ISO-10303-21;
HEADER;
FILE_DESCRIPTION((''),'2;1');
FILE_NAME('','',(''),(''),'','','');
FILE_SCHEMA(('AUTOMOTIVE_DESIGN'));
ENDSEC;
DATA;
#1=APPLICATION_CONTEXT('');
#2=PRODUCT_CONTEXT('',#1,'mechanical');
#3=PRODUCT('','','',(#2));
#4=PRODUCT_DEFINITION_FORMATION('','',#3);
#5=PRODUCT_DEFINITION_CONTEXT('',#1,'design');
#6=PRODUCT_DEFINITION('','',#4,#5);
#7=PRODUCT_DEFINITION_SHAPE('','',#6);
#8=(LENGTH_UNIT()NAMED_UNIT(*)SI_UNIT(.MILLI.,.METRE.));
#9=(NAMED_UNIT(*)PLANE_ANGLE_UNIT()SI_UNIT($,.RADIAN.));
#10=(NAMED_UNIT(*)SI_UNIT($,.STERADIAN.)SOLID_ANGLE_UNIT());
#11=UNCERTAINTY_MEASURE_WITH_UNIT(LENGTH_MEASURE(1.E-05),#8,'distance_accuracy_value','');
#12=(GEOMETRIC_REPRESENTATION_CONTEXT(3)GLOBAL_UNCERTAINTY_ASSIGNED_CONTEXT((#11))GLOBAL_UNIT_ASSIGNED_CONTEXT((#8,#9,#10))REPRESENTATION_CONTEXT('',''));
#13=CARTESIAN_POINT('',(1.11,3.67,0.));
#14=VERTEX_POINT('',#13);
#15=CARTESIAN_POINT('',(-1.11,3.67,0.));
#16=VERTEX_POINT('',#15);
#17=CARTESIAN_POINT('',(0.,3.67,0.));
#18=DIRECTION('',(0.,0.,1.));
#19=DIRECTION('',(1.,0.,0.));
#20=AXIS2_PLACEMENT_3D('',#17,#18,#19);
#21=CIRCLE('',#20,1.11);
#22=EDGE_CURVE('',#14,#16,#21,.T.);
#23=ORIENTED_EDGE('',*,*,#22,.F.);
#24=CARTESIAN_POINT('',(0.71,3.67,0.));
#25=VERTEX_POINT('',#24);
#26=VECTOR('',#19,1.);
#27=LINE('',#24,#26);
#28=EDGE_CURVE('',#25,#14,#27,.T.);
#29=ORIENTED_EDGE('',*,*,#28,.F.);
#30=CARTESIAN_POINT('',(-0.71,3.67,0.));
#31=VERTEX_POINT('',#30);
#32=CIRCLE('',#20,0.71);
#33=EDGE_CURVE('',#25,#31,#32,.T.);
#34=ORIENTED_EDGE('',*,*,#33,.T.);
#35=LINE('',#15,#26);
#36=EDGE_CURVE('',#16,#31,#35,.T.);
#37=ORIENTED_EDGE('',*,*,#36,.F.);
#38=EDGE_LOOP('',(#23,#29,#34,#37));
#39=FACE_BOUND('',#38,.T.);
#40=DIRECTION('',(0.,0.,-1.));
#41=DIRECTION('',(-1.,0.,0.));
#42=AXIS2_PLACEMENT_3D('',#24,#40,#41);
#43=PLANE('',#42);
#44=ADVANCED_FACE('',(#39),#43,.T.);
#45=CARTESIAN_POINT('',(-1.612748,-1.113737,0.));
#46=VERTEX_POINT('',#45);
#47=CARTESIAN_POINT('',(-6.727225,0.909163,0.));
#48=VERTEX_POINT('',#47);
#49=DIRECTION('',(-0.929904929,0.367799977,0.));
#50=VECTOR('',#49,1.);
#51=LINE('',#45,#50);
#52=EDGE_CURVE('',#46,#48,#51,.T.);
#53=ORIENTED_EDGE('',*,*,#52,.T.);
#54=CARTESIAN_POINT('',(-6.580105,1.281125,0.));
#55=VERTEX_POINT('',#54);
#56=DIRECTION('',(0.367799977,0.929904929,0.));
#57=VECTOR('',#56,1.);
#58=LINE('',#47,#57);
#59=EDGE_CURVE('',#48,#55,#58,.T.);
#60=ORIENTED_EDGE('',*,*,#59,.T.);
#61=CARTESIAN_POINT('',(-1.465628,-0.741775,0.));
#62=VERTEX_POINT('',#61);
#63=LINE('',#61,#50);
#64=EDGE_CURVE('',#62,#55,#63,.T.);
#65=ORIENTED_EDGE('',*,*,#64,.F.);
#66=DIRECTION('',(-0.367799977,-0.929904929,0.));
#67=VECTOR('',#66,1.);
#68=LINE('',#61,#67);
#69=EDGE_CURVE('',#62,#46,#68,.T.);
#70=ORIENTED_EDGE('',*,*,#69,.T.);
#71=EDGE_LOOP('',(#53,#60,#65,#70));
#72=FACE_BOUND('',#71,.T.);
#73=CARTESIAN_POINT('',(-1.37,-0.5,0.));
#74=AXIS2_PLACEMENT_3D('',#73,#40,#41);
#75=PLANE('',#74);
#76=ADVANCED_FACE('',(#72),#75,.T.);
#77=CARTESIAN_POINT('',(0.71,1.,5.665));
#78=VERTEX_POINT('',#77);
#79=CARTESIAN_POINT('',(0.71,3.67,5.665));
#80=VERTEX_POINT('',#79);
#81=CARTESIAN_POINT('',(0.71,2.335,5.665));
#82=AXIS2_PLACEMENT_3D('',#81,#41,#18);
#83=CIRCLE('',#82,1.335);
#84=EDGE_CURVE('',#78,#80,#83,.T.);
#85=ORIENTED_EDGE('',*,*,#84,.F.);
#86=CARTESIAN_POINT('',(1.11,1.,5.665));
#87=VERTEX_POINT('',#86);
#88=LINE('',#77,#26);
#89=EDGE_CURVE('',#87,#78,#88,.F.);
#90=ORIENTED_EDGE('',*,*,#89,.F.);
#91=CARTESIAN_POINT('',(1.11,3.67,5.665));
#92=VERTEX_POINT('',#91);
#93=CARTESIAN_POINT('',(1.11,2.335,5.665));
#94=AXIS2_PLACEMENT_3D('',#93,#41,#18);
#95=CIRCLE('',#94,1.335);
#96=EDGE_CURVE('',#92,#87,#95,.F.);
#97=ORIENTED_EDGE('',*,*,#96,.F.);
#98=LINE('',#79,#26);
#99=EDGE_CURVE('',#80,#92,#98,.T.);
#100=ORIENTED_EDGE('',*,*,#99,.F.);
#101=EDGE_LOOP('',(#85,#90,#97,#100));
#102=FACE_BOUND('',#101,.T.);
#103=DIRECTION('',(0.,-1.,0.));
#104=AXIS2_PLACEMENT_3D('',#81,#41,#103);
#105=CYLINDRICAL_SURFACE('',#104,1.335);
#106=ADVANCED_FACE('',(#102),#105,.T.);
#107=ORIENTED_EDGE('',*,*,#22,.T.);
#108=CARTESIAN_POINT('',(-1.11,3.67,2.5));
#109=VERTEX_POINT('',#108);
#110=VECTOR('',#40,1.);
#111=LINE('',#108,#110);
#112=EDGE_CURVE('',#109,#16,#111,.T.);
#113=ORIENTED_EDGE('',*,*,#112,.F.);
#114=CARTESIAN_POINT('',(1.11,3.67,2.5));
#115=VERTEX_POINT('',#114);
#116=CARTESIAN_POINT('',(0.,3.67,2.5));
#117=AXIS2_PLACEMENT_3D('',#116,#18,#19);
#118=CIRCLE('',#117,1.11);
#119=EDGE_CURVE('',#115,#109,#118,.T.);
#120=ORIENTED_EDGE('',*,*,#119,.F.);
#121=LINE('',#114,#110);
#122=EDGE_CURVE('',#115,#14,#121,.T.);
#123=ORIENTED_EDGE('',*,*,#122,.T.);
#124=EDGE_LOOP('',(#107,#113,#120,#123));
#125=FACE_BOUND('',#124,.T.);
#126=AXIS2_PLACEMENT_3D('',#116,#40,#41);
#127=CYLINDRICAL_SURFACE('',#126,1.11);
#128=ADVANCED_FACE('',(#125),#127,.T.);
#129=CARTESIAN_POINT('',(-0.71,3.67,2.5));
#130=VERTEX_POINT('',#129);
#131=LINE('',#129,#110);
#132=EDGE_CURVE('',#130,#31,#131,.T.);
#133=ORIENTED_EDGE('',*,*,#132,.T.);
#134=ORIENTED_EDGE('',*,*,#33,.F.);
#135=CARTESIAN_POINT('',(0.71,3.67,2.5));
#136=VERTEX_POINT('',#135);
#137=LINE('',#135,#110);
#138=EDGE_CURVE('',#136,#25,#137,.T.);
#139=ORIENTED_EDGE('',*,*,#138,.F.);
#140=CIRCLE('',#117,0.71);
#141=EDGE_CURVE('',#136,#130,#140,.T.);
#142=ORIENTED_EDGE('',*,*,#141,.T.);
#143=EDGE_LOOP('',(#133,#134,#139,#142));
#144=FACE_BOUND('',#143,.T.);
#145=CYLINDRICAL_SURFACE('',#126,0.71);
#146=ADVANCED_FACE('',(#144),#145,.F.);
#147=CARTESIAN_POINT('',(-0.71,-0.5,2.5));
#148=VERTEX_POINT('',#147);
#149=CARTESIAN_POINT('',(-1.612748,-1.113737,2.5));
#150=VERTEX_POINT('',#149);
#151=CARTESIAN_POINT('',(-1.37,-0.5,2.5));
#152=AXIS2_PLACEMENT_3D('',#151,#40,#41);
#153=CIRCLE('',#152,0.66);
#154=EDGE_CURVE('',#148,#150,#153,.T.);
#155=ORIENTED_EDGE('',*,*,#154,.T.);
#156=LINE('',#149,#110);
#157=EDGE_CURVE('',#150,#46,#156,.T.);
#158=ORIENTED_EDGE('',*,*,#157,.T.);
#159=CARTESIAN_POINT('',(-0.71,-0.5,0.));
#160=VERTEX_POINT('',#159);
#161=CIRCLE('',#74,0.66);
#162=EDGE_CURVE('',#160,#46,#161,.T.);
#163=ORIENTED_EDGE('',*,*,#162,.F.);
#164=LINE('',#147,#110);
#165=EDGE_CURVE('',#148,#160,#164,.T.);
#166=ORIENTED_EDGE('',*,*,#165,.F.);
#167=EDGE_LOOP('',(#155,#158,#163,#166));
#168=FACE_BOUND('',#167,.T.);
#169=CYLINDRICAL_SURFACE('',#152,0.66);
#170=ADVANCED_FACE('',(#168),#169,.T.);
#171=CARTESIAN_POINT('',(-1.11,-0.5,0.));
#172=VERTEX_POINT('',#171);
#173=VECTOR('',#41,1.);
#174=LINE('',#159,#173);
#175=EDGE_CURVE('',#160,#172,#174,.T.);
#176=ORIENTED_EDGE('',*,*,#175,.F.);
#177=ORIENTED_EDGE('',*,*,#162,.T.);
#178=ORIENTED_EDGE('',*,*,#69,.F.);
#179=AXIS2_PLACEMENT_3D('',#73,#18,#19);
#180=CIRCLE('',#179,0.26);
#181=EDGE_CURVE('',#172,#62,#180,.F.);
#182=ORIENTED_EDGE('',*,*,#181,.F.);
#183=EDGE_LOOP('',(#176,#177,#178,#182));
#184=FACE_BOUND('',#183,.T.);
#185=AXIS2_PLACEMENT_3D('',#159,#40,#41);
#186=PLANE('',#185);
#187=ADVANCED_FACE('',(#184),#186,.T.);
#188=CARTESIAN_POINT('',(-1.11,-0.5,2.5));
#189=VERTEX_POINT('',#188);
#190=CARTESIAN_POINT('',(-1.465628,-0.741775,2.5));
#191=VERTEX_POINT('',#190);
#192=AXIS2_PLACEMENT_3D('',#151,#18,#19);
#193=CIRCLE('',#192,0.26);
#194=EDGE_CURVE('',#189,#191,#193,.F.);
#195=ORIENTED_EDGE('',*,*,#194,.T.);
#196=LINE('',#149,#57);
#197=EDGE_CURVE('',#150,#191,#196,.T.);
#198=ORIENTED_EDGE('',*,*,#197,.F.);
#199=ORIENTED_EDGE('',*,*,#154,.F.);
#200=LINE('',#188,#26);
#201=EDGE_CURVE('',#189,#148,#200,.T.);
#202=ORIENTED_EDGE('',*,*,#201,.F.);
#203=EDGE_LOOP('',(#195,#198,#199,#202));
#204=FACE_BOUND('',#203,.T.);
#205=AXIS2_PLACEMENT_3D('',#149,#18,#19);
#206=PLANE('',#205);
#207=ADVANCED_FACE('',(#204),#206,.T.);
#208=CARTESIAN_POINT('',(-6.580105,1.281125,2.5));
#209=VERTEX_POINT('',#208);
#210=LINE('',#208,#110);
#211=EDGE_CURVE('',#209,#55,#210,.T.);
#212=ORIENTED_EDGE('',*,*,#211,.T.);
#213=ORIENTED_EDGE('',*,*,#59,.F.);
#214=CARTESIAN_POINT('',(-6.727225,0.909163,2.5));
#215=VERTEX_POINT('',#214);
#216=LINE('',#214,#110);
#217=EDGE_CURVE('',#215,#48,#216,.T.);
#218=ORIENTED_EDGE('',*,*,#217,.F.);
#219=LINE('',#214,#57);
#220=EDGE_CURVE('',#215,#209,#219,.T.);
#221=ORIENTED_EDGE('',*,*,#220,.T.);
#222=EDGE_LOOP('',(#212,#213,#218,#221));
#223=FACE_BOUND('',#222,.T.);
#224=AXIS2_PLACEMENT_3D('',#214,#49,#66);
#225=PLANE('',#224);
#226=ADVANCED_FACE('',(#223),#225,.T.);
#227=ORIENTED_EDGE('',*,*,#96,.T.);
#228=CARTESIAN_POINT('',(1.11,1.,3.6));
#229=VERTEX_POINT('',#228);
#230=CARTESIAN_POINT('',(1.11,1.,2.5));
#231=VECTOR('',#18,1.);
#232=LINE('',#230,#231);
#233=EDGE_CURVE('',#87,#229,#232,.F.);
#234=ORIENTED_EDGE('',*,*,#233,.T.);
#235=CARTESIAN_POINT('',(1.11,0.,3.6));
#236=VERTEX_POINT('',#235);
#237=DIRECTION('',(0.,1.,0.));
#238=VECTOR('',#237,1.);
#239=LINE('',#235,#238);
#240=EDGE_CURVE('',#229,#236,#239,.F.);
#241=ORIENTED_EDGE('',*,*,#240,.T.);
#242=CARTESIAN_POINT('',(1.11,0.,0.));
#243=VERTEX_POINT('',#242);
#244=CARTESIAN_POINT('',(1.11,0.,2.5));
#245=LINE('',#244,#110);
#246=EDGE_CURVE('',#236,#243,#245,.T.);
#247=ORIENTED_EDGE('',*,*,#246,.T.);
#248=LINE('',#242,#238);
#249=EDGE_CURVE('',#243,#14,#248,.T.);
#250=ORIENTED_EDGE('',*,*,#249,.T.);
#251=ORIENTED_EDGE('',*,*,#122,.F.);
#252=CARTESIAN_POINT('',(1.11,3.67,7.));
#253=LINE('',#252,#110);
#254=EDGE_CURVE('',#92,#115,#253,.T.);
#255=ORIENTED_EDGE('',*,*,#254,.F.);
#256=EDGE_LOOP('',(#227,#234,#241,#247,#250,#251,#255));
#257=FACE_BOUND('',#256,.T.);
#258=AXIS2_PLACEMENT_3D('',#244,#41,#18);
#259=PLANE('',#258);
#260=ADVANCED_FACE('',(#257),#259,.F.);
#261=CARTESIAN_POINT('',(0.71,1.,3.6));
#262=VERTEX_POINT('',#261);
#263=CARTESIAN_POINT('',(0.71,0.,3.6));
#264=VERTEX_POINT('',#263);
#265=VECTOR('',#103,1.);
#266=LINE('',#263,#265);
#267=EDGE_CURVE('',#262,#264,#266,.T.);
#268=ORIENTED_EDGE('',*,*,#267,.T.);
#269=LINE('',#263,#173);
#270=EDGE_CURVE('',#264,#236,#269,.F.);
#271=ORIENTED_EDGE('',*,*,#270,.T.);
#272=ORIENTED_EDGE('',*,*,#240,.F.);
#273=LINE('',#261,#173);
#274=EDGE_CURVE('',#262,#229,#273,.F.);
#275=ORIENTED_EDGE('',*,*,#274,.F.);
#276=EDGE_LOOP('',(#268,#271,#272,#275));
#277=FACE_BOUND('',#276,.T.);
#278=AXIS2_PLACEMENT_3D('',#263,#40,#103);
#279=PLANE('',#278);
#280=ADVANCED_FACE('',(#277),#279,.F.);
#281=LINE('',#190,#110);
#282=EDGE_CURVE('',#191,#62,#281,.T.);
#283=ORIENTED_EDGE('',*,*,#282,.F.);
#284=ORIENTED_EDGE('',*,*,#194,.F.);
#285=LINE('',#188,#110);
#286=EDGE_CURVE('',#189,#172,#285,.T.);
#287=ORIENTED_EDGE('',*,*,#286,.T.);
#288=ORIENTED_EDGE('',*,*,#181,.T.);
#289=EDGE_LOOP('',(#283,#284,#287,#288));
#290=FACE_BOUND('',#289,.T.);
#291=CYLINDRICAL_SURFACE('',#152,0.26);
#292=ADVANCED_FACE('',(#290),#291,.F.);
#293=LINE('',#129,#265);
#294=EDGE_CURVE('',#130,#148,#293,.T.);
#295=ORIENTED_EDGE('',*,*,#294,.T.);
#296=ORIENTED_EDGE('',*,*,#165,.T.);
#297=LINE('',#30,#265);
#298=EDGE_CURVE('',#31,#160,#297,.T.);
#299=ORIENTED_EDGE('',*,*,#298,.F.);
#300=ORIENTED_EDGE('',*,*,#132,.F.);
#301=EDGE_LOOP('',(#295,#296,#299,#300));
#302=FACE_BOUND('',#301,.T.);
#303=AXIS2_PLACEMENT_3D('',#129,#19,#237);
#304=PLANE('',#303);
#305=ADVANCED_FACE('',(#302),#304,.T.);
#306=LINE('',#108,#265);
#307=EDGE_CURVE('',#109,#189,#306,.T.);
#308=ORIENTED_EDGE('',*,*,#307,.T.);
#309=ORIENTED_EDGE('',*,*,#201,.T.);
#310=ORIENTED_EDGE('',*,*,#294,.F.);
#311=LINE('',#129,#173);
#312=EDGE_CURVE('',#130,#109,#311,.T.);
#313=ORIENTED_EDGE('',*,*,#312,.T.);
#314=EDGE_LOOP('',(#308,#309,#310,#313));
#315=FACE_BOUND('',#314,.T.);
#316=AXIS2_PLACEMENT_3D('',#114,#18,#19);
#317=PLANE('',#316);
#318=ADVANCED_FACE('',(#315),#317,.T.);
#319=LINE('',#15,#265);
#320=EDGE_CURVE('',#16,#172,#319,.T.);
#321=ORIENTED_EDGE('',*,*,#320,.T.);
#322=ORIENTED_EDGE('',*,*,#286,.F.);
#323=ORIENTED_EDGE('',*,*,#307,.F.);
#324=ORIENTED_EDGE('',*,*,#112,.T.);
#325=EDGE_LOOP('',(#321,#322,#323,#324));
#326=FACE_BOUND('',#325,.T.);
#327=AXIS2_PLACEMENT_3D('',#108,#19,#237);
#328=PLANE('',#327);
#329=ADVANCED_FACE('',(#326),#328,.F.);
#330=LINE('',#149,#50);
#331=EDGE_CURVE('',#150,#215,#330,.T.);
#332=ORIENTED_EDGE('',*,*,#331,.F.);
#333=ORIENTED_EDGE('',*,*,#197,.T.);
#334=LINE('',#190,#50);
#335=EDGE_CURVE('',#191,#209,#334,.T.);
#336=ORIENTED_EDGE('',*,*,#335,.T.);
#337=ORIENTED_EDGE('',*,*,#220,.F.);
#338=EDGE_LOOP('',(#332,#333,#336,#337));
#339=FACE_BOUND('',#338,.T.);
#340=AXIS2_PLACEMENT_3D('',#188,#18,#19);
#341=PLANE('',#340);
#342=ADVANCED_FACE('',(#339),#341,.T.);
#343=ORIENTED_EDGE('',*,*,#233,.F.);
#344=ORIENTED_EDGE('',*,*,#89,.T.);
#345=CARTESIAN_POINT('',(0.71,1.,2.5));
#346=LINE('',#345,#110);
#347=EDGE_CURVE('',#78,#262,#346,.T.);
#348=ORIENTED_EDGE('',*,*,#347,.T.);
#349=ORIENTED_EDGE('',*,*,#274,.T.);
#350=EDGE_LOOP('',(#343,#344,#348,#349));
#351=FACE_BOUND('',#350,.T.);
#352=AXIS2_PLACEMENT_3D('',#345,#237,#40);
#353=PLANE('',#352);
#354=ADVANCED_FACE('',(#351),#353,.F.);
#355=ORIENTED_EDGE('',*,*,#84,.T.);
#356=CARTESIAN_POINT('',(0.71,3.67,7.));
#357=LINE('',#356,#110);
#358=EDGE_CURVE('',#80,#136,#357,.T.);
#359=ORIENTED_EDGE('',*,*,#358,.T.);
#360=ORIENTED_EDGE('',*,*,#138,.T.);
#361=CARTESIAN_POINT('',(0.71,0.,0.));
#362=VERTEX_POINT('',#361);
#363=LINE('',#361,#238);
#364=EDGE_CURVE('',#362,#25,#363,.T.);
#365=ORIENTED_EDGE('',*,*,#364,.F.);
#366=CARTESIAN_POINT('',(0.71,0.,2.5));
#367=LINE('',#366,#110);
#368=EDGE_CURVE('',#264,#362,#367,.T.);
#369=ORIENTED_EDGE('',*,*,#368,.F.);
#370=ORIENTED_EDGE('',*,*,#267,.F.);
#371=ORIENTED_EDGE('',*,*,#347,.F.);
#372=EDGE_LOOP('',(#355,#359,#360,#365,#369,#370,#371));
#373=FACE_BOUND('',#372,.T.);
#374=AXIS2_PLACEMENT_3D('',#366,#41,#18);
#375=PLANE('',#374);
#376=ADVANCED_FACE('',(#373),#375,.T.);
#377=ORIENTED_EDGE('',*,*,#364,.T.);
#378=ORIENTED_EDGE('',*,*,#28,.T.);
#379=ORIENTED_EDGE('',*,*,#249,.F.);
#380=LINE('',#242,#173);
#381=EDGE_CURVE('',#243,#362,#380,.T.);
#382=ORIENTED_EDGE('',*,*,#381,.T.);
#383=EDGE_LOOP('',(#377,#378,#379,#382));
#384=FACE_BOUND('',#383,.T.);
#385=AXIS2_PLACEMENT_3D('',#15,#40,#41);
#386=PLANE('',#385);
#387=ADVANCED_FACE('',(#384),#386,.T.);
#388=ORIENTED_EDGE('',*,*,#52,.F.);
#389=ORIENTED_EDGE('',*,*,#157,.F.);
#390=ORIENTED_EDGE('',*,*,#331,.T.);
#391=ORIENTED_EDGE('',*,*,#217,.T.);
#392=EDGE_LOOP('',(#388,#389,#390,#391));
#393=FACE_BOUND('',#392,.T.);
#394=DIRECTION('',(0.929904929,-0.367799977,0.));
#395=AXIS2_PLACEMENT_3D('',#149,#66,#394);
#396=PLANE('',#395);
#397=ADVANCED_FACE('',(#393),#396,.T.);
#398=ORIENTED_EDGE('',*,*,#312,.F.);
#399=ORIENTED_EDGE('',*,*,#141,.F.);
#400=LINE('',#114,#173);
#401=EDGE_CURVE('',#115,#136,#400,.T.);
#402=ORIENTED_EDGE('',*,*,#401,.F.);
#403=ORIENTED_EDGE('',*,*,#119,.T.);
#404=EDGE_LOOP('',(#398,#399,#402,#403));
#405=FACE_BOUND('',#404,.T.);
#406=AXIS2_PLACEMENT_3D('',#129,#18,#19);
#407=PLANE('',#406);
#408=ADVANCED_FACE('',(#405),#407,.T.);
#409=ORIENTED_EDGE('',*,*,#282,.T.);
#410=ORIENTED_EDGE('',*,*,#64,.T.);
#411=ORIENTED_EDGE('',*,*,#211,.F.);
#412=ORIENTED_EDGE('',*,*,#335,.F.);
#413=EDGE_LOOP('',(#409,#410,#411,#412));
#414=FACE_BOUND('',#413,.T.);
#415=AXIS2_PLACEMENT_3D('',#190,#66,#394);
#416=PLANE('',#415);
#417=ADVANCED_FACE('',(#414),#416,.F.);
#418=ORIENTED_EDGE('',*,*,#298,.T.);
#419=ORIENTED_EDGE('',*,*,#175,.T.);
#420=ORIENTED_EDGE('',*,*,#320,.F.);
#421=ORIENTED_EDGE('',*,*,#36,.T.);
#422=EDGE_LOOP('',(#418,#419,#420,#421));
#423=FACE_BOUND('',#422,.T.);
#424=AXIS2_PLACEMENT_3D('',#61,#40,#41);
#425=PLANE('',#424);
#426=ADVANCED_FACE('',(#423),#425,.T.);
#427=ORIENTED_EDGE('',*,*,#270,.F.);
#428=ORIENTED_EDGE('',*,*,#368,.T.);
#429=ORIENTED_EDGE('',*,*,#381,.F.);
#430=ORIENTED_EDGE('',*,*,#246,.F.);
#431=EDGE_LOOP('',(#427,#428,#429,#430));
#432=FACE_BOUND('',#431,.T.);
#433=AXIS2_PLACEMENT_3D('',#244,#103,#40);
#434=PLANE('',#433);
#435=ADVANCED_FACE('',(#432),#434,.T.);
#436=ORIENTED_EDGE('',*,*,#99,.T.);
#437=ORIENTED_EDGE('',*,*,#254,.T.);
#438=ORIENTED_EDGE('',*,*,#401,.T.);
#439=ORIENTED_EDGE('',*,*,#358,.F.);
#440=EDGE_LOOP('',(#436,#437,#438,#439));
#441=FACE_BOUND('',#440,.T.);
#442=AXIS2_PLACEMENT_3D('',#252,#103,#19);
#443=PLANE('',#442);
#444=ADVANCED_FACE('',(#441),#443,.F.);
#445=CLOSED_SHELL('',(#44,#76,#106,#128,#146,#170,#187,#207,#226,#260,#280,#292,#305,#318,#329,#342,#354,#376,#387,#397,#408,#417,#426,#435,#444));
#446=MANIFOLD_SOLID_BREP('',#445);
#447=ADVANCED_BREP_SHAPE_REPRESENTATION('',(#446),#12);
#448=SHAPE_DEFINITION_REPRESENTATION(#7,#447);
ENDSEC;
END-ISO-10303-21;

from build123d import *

# Parameters (mm, degrees)
BASE_FLANGE1_DEPTH  = 2.5
SKETCH6_W           = 0.4
SKETCH6_H           = 3.67
BOSS_EXTRUDE1_DEPTH = 4.5
SKETCH7_W           = 3.4
SKETCH7_H           = 1
CUT_EXTRUDE1_DEPTH  = 4.5
FILLET1_RADIUS      = 1.335
FILLET1_LENGTH      = 0.4


# Sheet-metal steps are written as plain solids
with BuildPart() as part:
    # Sketch1 → Base-Flange1 (new body)
    with BuildSketch(Plane.XY):
        with BuildLine():
            Line((0.71, 0), (0.71, 3.67))
            ThreePointArc((0.71, 3.67), (0, 4.38), (-0.71, 3.67))
            Line((-0.71, 3.67), (-0.71, -0.5))
            ThreePointArc((-0.71, -0.5), (-0.998929703, -1.045808423), (-1.612747985, -1.113737253))
            Line((-1.612747985, -1.113737253), (-6.727225094, 0.909162621))
            Line((-6.727225094, 0.909162621), (-6.580105103, 1.281124592))
            Line((-6.580105103, 1.281124592), (-1.465627994, -0.741775282))
            ThreePointArc((-1.465627994, -0.741775282), (-1.223820792, -0.71501544), (-1.11, -0.5))
            Line((-1.11, -0.5), (-1.11, 3.67))
            ThreePointArc((-1.11, 3.67), (0, 4.78), (1.11, 3.67))
            Line((1.11, 3.67), (1.11, 0))
            Line((1.11, 0), (0.71, 0))
        make_face()
    extrude(amount=BASE_FLANGE1_DEPTH)

    # Sketch6 → Boss-Extrude1 (add)
    with BuildSketch(Plane.XY.offset(2.5)):
        with Locations((0.91, 1.835)):
            Rectangle(SKETCH6_W, SKETCH6_H)
    extrude(amount=BOSS_EXTRUDE1_DEPTH)

    # Sketch7 → Cut-Extrude1 (cut)
    with BuildSketch(Plane(origin=(1.11, 0, 0), x_dir=(0, 0, -1), z_dir=(1, 0, 0))):
        with Locations((-5.3, 0.5)):
            Rectangle(SKETCH7_W, SKETCH7_H)
    extrude(amount=-CUT_EXTRUDE1_DEPTH, mode=Mode.SUBTRACT)

    # Fillet1: full round fillet: the end face becomes a half cylinder, R = half its width
    fillet1_face = Plane((0.91, 2.335, 7), x_dir=(-1, 0, 0), z_dir=(0, 0, 1))  # on the end face: x along it, z out of the body
    fillet1_slab = fillet1_face.offset(-FILLET1_RADIUS / 2) * Box(FILLET1_LENGTH, 2 * FILLET1_RADIUS, FILLET1_RADIUS, mode=Mode.PRIVATE)  # the body's end, R deep
    fillet1_round = Plane((0.91, 2.335, 5.665), x_dir=(0, 0, 1), z_dir=(-1, 0, 0)) * Cylinder(FILLET1_RADIUS, FILLET1_LENGTH, mode=Mode.PRIVATE)  # its axis R under the face
    add(fillet1_slab - fillet1_round, mode=Mode.SUBTRACT)


solid = part.part
